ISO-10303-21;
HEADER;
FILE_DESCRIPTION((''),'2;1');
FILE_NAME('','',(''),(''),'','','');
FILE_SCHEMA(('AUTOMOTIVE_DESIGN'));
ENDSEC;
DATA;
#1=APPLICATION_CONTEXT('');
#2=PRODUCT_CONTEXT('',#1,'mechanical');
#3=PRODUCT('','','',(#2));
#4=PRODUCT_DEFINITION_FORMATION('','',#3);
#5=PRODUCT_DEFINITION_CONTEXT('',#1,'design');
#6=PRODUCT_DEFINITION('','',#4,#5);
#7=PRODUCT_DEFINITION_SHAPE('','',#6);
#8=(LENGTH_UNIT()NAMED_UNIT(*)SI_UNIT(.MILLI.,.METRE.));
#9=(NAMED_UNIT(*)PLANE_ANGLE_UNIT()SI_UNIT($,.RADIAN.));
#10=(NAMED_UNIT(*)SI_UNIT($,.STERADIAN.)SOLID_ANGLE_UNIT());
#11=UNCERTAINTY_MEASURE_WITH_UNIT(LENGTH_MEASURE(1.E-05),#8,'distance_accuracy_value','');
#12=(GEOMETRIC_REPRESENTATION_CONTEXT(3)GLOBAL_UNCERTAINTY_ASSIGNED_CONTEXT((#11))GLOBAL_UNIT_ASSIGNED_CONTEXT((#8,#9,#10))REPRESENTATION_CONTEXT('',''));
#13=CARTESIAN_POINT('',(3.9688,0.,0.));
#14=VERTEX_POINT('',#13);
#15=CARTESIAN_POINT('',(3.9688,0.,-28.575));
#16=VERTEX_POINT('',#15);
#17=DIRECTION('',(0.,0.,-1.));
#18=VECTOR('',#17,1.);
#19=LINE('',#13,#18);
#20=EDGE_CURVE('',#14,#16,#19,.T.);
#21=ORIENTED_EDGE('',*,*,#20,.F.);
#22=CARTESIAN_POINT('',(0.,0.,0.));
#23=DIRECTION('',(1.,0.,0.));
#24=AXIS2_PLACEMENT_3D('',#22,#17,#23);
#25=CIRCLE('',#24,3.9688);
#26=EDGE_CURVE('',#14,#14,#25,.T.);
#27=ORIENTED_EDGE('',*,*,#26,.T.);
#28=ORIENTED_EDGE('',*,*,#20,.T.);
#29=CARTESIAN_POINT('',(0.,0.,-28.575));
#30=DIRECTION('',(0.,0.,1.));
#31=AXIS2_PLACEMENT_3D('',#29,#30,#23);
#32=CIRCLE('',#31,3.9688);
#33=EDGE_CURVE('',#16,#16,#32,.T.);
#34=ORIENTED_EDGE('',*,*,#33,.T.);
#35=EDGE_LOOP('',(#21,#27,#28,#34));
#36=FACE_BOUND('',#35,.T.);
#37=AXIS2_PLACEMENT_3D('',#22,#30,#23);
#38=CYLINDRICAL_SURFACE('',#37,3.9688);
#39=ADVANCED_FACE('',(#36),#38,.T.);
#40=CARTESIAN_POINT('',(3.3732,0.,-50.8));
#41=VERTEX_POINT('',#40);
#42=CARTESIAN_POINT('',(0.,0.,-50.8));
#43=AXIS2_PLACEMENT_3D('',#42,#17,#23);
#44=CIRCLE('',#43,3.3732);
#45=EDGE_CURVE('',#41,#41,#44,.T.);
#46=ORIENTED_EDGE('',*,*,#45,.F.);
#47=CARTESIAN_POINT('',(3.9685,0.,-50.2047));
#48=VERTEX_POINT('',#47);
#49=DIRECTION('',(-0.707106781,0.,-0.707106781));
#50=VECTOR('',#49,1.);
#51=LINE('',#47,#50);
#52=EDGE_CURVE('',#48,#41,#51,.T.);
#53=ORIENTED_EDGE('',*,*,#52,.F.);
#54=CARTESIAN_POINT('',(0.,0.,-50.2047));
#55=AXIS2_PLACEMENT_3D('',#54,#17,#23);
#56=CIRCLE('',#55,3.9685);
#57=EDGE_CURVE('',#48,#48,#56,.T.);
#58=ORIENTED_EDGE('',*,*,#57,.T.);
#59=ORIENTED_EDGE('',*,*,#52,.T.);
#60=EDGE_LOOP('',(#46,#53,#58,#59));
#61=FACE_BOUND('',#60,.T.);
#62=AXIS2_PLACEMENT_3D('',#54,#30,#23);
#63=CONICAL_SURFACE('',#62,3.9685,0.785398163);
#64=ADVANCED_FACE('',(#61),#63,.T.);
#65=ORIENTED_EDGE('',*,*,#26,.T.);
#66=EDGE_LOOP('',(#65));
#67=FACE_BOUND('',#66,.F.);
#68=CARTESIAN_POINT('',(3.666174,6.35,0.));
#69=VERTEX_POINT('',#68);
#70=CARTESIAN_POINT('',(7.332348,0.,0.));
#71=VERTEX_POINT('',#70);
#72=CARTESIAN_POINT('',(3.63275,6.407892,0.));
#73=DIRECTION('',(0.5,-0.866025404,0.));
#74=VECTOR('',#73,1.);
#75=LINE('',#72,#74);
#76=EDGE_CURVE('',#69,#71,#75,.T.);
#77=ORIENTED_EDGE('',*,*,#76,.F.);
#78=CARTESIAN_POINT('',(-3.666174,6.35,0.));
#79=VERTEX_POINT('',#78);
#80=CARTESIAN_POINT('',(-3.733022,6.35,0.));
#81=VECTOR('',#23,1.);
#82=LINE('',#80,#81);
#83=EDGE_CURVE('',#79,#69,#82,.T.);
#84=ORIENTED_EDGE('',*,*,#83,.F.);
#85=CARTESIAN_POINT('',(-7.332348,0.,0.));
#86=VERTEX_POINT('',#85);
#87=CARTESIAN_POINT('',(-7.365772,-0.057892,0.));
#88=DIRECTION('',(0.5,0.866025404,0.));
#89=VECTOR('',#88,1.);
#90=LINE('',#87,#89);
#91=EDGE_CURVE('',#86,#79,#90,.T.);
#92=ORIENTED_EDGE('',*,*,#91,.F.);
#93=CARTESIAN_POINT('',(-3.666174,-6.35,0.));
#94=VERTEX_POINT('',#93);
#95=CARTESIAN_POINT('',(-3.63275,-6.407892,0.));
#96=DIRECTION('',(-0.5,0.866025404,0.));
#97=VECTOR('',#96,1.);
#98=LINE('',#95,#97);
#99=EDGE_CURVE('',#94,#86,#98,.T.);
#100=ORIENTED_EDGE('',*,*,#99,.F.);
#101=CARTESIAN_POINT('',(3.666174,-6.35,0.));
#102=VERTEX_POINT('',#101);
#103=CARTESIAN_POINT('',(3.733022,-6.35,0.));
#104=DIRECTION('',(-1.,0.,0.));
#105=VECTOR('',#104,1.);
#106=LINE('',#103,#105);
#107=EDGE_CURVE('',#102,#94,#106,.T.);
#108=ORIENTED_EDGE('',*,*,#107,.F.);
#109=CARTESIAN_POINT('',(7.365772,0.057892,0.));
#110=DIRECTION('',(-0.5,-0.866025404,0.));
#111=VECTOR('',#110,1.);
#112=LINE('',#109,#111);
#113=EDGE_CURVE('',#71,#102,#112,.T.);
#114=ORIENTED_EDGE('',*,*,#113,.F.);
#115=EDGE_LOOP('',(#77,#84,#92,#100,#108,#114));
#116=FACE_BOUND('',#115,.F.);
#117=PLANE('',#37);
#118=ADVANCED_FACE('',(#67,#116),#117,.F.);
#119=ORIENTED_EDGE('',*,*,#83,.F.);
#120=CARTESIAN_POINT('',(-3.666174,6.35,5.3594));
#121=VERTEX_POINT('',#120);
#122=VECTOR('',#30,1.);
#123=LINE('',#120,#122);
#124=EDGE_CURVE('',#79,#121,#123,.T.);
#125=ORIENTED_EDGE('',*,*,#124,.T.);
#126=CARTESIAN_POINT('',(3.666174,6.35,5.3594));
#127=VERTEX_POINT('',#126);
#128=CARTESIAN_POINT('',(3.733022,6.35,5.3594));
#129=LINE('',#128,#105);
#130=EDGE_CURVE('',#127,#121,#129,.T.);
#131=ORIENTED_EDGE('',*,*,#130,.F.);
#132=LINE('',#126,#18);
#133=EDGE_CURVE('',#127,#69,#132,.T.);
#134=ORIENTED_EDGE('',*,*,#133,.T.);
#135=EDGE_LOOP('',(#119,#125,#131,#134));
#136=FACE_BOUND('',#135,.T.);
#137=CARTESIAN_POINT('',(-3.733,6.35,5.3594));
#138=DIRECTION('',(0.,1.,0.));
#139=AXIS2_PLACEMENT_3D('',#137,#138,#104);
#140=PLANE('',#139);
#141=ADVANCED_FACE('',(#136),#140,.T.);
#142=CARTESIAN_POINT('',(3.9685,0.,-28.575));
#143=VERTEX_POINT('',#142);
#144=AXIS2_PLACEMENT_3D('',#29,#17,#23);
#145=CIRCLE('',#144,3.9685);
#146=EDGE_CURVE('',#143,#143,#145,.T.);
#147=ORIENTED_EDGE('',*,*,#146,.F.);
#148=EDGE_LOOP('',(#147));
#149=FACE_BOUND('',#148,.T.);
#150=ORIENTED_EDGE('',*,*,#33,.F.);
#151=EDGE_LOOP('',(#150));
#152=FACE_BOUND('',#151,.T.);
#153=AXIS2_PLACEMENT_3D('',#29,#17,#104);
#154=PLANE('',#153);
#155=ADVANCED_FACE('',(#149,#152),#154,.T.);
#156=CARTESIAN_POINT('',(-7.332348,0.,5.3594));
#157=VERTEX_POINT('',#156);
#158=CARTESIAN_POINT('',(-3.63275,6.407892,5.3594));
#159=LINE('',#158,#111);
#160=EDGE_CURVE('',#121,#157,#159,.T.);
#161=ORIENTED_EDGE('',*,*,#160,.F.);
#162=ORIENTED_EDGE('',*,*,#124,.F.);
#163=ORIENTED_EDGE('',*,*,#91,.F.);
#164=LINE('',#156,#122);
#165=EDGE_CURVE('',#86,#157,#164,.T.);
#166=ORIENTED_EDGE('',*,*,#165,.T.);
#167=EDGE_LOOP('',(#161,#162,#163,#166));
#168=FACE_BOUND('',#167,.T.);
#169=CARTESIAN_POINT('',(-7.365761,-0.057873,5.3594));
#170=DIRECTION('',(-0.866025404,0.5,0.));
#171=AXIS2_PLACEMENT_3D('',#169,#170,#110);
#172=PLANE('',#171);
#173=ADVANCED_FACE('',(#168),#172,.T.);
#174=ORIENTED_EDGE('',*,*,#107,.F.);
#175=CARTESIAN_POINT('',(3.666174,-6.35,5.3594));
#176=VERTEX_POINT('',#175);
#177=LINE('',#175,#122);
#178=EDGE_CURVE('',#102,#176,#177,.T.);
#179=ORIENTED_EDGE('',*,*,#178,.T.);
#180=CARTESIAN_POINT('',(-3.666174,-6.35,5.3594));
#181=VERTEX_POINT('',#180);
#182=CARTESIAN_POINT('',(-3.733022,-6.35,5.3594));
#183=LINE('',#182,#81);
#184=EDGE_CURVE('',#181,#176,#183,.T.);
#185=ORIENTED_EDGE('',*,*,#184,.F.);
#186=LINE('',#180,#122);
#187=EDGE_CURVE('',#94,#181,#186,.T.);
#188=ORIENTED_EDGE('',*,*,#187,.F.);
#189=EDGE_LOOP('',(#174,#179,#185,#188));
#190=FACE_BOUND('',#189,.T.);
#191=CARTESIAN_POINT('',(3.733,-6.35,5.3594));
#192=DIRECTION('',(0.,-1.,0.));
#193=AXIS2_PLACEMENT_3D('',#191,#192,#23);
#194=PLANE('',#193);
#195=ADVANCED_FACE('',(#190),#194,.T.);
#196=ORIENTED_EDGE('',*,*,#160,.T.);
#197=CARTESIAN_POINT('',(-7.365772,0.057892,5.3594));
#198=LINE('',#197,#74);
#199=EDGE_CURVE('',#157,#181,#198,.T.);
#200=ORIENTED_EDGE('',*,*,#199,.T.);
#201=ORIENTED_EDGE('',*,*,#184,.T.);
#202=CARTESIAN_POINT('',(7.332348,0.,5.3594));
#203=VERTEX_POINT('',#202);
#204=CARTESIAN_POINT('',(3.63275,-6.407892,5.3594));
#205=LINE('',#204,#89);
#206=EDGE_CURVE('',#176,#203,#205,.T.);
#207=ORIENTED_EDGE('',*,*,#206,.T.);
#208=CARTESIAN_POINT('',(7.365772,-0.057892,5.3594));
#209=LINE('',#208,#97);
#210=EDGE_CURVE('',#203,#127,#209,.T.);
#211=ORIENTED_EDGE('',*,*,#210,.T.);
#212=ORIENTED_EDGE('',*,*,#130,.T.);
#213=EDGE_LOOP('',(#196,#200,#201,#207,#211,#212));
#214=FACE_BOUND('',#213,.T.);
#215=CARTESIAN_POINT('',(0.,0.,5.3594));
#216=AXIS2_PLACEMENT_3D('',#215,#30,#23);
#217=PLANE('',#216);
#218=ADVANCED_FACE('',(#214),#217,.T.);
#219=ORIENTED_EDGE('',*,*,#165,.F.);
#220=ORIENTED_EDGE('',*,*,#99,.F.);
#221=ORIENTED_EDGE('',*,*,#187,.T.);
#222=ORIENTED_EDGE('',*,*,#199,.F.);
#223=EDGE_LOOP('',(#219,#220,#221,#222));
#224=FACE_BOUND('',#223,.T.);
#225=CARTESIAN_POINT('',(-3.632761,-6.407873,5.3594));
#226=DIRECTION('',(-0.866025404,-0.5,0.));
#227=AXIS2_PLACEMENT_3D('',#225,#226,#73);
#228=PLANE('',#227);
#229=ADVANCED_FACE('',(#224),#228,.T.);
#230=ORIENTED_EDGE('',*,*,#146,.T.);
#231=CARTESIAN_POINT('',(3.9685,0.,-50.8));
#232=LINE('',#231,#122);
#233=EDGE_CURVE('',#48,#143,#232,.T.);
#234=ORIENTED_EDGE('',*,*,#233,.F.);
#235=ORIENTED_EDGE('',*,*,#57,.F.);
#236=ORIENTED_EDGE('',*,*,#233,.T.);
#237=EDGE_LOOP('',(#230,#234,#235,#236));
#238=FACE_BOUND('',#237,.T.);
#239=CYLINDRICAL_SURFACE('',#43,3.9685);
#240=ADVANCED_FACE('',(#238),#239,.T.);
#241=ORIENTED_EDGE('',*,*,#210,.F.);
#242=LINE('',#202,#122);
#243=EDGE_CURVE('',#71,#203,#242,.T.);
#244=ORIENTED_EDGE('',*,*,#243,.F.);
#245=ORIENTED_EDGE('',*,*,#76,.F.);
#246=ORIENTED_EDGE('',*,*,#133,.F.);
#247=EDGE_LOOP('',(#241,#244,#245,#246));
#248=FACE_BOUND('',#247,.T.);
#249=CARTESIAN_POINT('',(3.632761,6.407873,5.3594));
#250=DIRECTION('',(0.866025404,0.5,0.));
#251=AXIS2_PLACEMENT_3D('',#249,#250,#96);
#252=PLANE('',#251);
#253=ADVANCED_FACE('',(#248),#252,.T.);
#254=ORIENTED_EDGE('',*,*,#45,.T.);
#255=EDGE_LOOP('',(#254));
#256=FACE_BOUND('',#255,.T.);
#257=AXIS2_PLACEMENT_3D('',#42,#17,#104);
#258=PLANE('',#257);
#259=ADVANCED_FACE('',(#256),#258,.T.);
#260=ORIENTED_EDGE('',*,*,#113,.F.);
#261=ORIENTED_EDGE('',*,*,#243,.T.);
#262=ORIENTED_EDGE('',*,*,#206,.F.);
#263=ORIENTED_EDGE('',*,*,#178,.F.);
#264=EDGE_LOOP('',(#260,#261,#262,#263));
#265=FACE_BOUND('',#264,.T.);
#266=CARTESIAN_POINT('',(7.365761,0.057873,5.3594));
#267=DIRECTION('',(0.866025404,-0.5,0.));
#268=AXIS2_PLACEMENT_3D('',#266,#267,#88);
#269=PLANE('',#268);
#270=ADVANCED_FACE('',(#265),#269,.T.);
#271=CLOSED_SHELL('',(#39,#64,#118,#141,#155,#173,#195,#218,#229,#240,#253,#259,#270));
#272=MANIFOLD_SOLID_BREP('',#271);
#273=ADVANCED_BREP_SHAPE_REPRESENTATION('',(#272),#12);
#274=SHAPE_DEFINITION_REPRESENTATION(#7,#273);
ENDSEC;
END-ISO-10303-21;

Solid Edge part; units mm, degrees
sketch "Sketch1" plane through (0, 0, 0) normal (0, 0, 1) x (1, 0, 0)
  circle A0 centre (0, 0) radius 7.366
  dimension "D1" = 14.732
extrude "Protrusion1" add sketch "Sketch1" along normal blind 5.3594
sketch "Sketch2" plane through (0, 0, 0) normal (0, 0, -1) x (1, 0, 0)
  circle A0 centre (0, 0) radius 3.9688
extrude "Protrusion2" add sketch "Sketch2" along normal blind 50.8
sketch "Sketch3" plane through (0, 0, -50.8) normal (0, 0, -1) x (1, 0, 0)
  circle A0 centre (0, 0) radius 3.9685
extrude "Cutout1" cut sketch "Sketch3" against normal blind 22.225 flip side to cut
chamfer "Chamfer_1" distance 0.5953 angle 45 1 edges at (-3.9685, 0, -50.8)
sketch "Sketch4" plane through (0, 0, 5.3594) normal (0, 0, 1) x (1, 0, 0)
  line L0 (-3.733, 6.35) -> (3.733, 6.35)
  dimension "D1" = 12.7
extrude "Cutout2" cut sketch "Sketch4" against normal up to next material side at (0, 6.4, 5.3594)
pattern_circular "Pattern1" count 6 over 360 about axis through (0, 0, 5.3594) along (0, 0, 1) of "Cutout2"
properties part number "117622"
